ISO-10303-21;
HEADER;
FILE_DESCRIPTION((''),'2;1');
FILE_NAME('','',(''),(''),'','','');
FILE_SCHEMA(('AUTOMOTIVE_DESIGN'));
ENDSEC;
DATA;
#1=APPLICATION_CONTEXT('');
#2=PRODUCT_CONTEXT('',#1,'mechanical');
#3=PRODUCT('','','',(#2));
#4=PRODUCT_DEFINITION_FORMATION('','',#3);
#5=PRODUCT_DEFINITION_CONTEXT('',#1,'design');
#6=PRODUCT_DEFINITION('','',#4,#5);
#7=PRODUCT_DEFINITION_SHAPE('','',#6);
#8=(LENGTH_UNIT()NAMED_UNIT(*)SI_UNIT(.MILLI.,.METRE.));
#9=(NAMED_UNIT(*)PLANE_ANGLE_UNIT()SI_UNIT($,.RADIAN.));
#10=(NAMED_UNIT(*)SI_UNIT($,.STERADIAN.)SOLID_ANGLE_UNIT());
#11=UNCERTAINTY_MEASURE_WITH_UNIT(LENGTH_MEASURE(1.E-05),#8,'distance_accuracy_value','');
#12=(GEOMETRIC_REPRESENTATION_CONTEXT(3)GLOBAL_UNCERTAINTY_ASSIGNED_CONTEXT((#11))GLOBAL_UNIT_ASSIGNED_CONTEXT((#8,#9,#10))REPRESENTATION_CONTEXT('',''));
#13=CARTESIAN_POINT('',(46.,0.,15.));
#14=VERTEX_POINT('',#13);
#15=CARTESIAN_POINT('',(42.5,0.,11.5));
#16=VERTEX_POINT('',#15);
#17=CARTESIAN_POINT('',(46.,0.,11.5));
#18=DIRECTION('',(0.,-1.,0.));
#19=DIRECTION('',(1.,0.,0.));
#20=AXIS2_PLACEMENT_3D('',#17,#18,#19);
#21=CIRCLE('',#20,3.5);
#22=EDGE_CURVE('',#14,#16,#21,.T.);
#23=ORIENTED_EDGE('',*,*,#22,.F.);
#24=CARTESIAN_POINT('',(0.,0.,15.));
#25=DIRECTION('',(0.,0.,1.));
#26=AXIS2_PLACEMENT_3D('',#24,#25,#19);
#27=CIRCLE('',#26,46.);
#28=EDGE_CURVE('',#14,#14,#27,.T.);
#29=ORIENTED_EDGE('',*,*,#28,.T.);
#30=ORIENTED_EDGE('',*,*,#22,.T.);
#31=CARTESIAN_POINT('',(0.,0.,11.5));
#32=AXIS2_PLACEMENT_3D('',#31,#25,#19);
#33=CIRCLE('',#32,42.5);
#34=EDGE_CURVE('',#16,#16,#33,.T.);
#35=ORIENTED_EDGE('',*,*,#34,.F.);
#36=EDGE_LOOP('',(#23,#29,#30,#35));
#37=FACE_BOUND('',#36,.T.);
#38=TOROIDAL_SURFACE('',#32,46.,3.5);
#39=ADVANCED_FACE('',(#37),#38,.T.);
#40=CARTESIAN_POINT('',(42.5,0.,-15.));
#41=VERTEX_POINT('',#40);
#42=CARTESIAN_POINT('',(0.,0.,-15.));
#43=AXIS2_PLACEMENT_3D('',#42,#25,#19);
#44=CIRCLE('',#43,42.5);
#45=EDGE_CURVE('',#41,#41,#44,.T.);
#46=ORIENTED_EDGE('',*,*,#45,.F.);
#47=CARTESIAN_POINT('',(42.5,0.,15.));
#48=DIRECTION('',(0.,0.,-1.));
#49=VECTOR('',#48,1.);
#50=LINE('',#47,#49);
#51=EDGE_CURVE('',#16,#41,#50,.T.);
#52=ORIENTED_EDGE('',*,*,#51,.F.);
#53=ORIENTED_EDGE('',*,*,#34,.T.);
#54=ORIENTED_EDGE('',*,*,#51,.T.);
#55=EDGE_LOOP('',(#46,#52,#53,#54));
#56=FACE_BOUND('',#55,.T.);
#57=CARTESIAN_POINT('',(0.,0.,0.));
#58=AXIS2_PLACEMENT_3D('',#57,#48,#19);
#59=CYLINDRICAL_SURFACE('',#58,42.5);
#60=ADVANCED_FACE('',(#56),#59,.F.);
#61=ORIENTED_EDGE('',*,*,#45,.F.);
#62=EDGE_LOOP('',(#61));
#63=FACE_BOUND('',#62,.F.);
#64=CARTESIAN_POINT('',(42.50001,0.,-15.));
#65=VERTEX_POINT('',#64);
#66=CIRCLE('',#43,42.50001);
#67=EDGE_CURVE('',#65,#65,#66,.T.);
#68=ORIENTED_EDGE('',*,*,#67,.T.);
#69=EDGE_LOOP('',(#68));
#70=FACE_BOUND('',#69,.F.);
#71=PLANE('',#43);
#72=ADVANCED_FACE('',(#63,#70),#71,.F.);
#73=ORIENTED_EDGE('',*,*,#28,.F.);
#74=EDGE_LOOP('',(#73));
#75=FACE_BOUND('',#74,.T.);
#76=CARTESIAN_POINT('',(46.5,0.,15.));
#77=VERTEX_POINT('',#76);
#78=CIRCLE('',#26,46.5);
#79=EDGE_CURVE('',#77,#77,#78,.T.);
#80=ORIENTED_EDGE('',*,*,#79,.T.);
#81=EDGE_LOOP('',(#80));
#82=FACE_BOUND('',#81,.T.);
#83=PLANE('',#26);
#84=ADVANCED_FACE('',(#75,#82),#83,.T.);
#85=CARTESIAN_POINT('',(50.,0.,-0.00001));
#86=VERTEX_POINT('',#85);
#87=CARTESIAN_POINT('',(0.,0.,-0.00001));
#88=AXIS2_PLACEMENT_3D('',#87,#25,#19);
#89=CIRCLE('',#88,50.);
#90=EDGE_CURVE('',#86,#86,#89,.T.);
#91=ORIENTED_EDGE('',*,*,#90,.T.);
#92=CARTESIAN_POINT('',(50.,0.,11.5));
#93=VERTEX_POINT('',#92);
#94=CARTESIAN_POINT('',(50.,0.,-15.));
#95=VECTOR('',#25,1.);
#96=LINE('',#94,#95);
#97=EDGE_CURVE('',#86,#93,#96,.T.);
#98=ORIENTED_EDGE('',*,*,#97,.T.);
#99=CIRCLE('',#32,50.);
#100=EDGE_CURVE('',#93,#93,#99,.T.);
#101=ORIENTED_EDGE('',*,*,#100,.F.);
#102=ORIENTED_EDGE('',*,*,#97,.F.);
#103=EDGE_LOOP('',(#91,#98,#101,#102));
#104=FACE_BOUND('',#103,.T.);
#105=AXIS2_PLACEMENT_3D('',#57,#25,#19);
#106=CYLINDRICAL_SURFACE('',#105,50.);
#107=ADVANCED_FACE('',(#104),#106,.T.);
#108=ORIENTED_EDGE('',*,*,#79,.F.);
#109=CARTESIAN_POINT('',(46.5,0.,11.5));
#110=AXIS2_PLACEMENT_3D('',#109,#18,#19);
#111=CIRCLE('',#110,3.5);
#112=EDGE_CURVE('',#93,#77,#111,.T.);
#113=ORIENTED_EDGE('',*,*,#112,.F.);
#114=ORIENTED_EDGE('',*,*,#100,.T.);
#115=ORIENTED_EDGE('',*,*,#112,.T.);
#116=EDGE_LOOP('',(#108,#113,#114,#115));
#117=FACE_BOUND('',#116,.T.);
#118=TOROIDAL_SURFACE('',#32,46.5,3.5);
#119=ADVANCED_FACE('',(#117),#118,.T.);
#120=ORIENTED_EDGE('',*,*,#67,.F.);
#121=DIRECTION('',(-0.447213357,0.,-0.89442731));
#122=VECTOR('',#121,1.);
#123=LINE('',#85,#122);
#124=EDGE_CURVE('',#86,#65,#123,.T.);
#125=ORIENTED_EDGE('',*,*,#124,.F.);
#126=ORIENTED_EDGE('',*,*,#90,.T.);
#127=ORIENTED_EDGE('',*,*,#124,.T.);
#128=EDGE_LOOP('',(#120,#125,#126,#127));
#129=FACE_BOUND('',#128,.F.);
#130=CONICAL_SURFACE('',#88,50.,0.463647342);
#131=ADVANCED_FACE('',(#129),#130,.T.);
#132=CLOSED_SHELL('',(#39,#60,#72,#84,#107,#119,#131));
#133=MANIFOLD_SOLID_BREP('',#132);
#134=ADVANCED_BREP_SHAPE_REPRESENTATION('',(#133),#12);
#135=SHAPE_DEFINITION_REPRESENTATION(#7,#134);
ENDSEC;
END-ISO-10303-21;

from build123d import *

# Parameters (mm, degrees)
F0_R     = 50
F0_R_2   = 42.5
F1_DEPTH = 15
F2_SIZE2 = 7.49999
F2_SIZE  = 14.99999
F3_R     = 3.5


# Not quite as in the source:
# - a fillet or chamfer is up to 0.001 mm smaller than in the source, because OpenCascade refuses the exact size


with BuildPart() as f1:
    # F0 (on Top) → F1 (new body, symmetric)
    with BuildSketch(Plane.XY):
        Circle(F0_R)
        Circle(F0_R_2, mode=Mode.SUBTRACT)
    extrude(amount=F1_DEPTH, both=True)

    # F2 (size 15 and 7.5 in the source; OpenCascade refuses exactly that, so slightly less here)
    f2_edges = [f1.edges().sort_by_distance(p)[0] for p in [
        (-50, 0, -15),
    ]]
    f2_side = f1.faces().sort_by_distance((-50, 0, 0))[0]
    chamfer(f2_edges, length=F2_SIZE, length2=F2_SIZE2, reference=f2_side)

    # F3
    f3_edges = [f1.edges().sort_by_distance(p)[0] for p in [
        (-50, 0, 15),
        (-42.5, 0, 15),
    ]]
    fillet(f3_edges, radius=F3_R)


solid = f1.part
